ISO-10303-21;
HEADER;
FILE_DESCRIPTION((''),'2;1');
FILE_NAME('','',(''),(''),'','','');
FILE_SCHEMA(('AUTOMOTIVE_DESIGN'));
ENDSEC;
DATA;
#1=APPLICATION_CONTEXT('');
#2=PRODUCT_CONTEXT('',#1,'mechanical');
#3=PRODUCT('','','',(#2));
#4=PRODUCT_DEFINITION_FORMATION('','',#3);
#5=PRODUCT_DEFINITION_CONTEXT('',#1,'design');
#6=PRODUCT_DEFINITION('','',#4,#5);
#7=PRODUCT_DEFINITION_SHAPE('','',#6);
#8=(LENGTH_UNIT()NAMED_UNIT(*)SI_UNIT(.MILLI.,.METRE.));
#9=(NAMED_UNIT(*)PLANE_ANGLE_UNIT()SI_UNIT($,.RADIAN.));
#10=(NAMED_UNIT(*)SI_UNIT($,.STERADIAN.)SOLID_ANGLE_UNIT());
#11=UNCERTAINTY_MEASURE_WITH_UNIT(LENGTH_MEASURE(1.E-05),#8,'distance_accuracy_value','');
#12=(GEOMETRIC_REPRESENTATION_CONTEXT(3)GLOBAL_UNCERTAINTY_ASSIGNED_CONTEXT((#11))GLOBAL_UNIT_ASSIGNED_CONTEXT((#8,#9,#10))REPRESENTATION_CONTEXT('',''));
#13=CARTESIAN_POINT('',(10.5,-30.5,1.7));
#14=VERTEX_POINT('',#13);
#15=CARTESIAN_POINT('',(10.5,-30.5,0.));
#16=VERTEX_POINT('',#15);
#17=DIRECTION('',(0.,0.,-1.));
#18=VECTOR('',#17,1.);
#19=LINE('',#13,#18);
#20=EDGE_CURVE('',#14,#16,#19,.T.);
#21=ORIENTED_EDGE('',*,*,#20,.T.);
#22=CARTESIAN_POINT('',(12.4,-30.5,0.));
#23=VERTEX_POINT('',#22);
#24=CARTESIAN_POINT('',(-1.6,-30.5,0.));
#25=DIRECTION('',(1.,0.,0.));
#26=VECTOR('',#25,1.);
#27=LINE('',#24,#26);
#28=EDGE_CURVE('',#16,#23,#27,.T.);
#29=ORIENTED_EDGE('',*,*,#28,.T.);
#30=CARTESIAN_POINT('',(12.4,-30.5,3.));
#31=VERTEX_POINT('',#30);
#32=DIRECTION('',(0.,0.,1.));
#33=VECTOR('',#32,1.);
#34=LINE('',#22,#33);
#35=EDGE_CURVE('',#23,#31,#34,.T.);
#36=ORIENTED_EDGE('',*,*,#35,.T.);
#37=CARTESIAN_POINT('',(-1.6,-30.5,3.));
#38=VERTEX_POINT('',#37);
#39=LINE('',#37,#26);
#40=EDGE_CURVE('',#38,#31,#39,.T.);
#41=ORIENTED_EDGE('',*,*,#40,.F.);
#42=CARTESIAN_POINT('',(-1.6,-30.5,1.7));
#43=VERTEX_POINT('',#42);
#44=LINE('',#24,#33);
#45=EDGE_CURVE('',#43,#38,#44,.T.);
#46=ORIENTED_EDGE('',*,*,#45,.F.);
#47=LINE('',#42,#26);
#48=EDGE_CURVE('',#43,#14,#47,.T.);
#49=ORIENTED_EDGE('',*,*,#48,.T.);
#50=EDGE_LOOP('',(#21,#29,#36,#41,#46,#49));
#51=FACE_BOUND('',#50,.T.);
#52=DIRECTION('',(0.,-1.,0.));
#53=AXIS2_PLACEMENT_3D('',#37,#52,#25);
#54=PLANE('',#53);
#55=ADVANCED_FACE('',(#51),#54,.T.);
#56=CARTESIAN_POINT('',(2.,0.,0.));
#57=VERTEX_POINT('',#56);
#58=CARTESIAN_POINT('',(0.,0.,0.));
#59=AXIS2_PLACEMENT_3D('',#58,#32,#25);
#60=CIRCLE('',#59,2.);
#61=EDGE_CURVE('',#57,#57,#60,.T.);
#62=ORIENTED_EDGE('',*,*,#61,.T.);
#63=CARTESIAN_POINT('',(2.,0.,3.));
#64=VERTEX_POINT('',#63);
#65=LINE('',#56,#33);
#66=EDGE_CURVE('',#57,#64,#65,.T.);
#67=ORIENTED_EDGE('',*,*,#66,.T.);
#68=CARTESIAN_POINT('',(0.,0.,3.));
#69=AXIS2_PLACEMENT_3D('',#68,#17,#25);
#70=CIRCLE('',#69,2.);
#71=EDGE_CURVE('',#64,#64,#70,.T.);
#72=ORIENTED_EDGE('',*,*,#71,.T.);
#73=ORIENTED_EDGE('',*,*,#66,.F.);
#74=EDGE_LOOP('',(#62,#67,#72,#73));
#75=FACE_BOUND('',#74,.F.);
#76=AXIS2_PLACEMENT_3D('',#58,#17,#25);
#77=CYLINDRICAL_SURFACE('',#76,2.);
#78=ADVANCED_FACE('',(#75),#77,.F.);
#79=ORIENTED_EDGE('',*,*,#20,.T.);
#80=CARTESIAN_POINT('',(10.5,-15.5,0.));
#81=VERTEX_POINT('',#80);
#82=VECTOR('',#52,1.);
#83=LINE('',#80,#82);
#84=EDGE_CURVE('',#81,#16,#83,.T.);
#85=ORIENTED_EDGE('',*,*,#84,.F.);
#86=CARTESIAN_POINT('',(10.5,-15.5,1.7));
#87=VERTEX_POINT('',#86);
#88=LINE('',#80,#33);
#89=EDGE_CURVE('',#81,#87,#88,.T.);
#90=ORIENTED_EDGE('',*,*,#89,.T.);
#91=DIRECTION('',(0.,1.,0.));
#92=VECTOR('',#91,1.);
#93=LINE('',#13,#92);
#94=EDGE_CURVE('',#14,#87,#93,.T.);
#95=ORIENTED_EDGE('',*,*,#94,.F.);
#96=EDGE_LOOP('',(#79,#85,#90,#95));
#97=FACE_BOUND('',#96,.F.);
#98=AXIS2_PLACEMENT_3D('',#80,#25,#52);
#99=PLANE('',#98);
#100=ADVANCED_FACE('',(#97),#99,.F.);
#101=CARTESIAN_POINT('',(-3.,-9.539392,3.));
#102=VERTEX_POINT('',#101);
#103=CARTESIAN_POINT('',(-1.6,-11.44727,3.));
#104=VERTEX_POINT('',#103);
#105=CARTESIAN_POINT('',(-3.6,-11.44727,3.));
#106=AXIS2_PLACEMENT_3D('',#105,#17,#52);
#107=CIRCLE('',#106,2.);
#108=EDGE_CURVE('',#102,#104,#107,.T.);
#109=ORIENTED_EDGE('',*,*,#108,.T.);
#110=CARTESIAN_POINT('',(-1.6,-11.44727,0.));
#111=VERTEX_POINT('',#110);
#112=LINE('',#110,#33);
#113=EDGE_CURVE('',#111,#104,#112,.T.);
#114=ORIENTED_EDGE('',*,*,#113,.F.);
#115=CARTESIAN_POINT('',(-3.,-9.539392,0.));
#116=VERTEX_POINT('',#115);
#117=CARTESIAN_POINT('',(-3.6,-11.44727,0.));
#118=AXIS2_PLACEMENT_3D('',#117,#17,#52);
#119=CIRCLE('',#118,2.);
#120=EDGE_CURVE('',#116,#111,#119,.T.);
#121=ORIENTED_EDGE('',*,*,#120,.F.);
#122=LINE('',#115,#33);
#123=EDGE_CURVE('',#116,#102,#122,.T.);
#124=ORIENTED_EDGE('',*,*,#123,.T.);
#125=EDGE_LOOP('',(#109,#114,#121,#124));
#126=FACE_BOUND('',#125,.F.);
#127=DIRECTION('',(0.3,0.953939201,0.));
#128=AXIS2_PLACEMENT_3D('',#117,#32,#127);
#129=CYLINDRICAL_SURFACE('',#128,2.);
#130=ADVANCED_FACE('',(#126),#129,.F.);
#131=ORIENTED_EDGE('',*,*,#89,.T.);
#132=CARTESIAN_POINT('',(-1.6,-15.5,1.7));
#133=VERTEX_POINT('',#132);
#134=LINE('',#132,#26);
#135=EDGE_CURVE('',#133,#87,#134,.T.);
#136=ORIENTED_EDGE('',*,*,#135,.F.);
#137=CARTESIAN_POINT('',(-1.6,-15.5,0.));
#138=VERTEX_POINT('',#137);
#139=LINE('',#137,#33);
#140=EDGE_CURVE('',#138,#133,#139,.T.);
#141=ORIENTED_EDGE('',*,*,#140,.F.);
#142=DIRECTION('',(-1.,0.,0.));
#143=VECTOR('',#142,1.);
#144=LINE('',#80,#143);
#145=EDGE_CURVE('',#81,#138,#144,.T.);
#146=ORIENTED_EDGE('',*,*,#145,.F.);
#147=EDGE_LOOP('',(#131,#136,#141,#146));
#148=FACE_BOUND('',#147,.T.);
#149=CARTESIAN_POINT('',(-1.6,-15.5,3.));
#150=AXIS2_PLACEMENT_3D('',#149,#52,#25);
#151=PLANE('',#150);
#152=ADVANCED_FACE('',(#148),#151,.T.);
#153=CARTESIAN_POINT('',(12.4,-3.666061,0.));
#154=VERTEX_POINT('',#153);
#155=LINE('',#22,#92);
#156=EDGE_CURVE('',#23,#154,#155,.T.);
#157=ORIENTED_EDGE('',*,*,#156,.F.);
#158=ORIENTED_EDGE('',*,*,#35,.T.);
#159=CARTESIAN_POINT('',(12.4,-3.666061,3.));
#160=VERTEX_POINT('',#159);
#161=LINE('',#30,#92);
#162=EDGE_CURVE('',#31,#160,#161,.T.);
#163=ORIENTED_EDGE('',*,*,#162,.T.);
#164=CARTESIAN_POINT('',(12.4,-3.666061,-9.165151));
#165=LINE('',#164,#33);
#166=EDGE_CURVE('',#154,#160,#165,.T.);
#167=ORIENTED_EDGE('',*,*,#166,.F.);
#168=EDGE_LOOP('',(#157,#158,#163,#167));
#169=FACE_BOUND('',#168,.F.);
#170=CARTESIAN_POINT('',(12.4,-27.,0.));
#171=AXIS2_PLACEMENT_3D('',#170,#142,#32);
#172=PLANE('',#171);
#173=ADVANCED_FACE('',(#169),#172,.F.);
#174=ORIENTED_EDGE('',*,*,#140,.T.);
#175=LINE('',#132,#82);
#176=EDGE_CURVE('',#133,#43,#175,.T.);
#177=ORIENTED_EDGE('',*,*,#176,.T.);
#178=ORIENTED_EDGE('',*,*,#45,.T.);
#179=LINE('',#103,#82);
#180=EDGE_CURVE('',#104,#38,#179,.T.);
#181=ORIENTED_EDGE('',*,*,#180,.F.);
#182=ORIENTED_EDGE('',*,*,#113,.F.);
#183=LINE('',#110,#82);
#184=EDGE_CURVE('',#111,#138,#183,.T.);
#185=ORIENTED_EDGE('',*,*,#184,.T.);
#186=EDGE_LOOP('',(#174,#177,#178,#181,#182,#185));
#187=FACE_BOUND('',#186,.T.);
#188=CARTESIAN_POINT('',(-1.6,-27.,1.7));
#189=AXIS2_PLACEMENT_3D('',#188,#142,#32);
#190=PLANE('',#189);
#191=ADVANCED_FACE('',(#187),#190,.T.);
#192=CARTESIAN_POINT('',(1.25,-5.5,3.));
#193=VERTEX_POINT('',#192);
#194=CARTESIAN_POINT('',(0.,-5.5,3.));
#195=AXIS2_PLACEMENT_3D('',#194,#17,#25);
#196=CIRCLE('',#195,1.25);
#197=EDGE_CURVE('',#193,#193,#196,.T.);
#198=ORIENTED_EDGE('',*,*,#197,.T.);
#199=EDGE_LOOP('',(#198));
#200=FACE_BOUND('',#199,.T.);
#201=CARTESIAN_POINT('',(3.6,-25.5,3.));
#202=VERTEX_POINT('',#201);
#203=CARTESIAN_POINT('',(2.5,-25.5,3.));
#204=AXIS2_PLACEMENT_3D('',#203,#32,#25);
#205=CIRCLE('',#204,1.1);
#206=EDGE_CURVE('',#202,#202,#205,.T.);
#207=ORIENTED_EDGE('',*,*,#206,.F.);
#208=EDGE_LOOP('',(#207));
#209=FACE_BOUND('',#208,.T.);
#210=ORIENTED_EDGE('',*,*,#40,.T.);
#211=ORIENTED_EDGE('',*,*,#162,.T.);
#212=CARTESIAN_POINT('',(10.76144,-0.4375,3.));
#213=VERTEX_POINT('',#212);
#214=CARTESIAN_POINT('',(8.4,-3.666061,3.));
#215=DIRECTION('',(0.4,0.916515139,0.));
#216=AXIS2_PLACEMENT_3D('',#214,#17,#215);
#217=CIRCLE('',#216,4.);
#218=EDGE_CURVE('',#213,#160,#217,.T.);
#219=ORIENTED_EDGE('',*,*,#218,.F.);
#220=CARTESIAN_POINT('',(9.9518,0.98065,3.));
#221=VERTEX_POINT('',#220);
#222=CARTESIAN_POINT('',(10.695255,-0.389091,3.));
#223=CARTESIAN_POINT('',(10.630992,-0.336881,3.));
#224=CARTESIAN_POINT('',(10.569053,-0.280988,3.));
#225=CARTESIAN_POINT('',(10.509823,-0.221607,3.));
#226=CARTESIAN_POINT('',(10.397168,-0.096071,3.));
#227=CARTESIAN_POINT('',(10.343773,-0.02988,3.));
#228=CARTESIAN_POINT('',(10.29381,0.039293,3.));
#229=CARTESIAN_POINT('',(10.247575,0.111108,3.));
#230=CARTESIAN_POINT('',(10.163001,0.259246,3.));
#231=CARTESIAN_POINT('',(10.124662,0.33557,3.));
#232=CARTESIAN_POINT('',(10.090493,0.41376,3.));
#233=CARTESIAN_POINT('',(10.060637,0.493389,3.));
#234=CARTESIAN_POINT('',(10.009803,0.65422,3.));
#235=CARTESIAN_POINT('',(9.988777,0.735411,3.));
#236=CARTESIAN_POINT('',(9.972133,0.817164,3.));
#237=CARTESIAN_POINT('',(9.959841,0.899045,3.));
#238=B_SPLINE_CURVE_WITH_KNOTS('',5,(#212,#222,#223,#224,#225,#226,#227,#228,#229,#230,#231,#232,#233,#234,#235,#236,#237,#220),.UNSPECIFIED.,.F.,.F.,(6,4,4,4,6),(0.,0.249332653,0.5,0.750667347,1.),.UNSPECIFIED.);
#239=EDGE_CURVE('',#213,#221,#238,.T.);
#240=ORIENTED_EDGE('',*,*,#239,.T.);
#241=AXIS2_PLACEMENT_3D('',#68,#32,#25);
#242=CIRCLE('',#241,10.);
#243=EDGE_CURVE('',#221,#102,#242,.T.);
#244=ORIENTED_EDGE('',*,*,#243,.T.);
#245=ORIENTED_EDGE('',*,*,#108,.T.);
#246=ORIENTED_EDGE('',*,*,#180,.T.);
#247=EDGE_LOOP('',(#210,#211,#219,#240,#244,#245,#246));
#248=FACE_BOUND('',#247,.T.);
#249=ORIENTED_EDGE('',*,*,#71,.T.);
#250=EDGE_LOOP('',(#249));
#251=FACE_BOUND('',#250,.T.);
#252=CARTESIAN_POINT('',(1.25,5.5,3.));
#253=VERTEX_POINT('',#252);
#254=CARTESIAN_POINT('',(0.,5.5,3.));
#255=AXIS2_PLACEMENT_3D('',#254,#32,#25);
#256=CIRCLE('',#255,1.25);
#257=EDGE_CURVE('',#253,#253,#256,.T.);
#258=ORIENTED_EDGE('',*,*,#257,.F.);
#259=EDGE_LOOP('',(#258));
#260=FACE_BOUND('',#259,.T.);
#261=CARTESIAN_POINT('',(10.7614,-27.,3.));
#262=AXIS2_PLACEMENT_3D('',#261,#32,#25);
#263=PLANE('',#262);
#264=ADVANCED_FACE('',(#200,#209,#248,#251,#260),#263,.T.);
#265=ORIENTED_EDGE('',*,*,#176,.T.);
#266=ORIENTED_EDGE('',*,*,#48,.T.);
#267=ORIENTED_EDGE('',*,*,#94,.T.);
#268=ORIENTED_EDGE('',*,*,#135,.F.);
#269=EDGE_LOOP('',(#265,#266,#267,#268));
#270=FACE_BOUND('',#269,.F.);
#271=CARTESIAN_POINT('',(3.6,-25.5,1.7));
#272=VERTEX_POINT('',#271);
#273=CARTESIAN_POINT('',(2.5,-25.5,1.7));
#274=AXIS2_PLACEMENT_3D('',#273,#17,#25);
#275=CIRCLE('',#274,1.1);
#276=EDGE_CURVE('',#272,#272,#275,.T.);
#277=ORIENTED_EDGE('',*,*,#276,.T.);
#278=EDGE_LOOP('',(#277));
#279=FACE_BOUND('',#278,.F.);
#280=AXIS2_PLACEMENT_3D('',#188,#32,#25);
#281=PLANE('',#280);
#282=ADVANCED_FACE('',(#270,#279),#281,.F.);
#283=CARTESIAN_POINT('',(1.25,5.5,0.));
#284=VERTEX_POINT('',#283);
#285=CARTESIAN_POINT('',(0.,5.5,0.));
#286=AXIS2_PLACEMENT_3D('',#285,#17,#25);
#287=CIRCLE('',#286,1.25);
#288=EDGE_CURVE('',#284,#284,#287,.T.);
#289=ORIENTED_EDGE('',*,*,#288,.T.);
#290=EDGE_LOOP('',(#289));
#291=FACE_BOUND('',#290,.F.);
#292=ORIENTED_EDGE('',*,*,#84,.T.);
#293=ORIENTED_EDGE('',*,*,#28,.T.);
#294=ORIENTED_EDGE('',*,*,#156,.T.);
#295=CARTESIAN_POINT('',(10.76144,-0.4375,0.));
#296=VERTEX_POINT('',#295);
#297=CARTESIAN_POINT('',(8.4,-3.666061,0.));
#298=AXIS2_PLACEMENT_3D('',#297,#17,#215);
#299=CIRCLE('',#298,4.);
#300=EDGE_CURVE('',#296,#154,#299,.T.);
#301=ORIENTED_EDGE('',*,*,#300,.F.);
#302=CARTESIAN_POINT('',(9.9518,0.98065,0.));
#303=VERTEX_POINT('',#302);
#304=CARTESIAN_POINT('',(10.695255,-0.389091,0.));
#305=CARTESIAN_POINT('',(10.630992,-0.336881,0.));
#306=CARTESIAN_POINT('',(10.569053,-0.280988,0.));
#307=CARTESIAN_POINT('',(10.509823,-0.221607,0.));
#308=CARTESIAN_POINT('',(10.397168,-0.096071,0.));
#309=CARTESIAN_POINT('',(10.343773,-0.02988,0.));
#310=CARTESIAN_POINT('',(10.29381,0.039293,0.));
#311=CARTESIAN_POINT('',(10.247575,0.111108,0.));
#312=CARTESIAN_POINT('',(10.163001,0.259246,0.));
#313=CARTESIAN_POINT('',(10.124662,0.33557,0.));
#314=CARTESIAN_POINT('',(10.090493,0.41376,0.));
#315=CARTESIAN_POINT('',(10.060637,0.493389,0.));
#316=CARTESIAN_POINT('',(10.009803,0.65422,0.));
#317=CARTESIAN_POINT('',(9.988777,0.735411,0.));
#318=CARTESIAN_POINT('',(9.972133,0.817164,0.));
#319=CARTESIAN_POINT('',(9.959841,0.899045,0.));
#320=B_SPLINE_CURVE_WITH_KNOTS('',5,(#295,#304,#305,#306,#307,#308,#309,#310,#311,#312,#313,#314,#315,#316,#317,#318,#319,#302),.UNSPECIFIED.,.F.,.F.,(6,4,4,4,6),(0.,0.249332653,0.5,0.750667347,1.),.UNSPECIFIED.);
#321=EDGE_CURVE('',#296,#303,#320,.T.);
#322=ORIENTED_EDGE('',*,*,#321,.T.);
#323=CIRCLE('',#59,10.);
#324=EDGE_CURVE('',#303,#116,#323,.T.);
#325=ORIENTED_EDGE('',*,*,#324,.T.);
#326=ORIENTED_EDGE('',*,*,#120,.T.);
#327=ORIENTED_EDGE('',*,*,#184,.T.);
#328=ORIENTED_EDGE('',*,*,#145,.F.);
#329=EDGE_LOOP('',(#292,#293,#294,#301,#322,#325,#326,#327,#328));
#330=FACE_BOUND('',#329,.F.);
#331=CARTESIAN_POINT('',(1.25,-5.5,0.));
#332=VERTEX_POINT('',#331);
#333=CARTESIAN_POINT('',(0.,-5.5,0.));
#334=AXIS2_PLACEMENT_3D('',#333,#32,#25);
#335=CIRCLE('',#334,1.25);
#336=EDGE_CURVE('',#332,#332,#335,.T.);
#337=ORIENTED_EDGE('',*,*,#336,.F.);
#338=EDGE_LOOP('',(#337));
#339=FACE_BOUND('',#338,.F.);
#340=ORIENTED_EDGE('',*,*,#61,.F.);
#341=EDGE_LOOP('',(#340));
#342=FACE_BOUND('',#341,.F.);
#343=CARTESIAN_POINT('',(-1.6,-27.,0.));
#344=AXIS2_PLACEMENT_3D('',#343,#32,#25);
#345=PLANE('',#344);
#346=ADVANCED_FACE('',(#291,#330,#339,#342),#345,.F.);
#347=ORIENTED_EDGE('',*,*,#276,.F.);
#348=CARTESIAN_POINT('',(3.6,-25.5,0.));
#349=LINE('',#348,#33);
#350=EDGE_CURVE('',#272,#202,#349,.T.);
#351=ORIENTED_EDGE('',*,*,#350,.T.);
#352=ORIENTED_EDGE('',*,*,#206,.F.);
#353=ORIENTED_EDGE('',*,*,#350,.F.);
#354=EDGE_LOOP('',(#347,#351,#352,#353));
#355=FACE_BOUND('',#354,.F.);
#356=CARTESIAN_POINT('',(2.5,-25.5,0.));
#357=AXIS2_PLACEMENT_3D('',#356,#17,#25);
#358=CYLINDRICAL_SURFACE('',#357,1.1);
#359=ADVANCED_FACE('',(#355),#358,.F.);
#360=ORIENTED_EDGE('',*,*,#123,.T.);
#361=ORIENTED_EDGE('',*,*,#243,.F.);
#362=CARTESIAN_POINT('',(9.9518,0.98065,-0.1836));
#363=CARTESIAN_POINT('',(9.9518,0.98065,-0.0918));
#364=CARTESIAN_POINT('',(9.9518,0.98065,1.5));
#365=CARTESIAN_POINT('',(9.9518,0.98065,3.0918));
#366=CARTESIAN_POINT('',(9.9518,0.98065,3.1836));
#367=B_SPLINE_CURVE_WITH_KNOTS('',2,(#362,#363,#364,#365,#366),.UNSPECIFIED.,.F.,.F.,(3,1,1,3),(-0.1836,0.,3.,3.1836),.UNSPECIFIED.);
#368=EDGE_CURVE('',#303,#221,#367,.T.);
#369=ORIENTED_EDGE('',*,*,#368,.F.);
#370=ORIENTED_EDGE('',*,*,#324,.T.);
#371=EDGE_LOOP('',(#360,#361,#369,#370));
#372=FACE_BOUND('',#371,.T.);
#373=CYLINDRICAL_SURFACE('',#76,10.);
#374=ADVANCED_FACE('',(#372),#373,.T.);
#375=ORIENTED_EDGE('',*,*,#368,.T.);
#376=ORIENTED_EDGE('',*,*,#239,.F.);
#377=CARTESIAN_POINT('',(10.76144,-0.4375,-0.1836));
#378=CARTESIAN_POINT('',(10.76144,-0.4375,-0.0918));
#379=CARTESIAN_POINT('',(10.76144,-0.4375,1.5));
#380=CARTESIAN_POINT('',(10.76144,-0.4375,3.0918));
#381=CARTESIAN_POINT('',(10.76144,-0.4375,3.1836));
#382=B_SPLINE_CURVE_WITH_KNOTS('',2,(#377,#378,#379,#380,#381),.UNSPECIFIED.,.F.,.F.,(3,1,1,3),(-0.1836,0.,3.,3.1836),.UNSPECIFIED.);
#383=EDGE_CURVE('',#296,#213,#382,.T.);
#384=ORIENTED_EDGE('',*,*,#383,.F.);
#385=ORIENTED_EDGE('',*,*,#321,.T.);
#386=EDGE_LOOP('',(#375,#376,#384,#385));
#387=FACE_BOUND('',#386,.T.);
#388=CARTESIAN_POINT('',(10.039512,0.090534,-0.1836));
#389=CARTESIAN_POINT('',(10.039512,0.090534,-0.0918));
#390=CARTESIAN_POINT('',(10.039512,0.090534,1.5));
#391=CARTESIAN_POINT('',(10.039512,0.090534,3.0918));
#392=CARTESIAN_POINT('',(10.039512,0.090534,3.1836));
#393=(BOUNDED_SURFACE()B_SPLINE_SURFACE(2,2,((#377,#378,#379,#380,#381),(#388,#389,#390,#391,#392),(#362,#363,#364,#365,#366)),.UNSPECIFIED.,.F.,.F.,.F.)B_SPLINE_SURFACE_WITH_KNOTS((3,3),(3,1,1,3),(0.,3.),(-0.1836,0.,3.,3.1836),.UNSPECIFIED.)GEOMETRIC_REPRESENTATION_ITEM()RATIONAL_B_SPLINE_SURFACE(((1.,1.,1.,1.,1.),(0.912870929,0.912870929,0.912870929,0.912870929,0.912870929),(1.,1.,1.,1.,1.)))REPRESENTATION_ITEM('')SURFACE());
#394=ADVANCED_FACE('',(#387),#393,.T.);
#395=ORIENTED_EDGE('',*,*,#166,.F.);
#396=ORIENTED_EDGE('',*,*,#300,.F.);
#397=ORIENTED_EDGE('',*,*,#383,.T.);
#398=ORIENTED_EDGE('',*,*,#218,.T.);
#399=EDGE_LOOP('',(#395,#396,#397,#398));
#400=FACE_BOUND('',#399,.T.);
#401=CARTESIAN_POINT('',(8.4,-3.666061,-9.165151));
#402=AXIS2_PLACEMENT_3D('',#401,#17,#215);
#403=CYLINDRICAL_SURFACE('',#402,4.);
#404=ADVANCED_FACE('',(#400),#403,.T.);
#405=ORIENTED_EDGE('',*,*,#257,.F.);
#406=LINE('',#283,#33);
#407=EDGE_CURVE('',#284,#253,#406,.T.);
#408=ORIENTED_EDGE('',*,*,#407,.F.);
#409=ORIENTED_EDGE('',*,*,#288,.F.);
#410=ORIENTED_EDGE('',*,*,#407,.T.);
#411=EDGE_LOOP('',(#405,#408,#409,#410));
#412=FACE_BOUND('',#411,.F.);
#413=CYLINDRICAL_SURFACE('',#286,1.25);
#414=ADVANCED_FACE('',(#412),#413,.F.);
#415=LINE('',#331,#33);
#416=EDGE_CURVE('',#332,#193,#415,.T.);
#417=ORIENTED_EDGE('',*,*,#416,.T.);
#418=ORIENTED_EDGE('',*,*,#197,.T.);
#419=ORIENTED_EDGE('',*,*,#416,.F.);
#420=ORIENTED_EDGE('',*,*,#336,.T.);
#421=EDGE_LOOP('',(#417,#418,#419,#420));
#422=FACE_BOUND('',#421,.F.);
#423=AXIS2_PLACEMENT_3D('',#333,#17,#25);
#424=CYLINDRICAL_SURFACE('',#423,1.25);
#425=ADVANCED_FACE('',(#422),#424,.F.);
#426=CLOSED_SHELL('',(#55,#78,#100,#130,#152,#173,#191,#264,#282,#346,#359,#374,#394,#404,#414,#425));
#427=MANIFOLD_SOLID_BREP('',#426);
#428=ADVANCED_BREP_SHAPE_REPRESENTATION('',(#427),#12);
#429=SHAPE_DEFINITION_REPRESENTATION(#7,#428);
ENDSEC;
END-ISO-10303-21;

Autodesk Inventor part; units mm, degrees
ref_plane "YZ Plane" through (0, 0, 0) normal (1, 0, 0) x (0, 1, 0)
ref_plane "XZ Plane" through (0, 0, 0) normal (0, 1, 0) x (-1, 0, 0)
ref_plane "XY Plane" through (0, 0, 0) normal (0, 0, 1) x (1, 0, 0)
sketch "スケッチ1" plane through (0, 0, 0) normal (0, 0, 1) x (1, 0, 0)
  circle A0 centre (0, 0) radius 10
  line L0 (0, 0) -> (12.4, 0)
  line L1 (12.4, 0) -> (12.4, -45)
  line L2 (12.4, -45) -> (-1.6, -45)
  line L3 (-1.6, -45) -> (-1.6, 0)
  circle A1 centre (2.5, -25.5) radius 1.1
  circle A2 centre (2.5, -32) radius 1.7
  circle A3 centre (2.5, -42) radius 1.7
  circle A4 centre (0, 0) radius 5.5
  circle A5 centre (0, 5.5) radius 1.25
  circle A6 centre (0, -5.5) radius 1.25
  circle A7 centre (0, 0) radius 2
  line L4 (0, 0) -> (0, -45)
  line L5 (2.5, -25.5) -> (12.4, -25.5)
  point P0 (7.5, -6.6144)
  point P1 (-1.6, -9.8712)
  point P2 (10, 0)
  dimension "d0" = 20
  dimension "d3" = 12.4
  dimension "d4" = 45
  dimension "d5" = 14
  dimension "d6" = 2.2
  dimension "d7" = 3.4
  dimension "d8" = 3.4
  dimension "d9" = 11
  dimension "d10" = 2.5
  dimension "d11" = 2.5
  dimension "d12" = 4
  dimension "d16" = 2.5
  dimension "d17" = 2.5
  dimension "d18" = 2.5
  dimension "d19" = 9.9
  dimension "d37" = 25.5
extrude "押し出し1" add sketch "スケッチ1" along normal blind 3 contours L0 A4 A5 L3 A0 | L0 L1 L2 L4 A0 | A0 L4 A6 A4 L0 | L3 A4 A6 L4 A0 | A0 L4 L2 L3 | A4 A6 L4 A7 L0 | L0 A7 L3 A4 A5 | L3 A7 L4 A6 A4
fillet "フィレット1" radius 2 1 edges at (-1.6, -9.8712, 1.5)
fillet "フィレット2" radius 4 1 edges at (12.4, 0, 1.5)
fillet "フィレット3" radius 2 1 edges at (10, 0, 1.5)
sketch "スケッチ2" plane through (0, 0, 3) normal (0, 0, 1) x (1, 0, 0)
  line L0 (12.4, -45) -> (12.4, -3.6661) projected
  line L1 (12.4, -45) -> (12.4, -27)
  line L2 (12.4, -27) -> (-1.6, -27)
  line L3 (-1.6, -11.4473) -> (-1.6, -45) projected
  line L4 (-1.6, -27) -> (-1.6, -45)
  line L5 (-1.6, -45) -> (12.4, -45) projected
  line L6 (-1.6, -45) -> (12.4, -45)
  point P0 (0, 0)
  dimension "d22" = 18
extrude "押し出し2" cut sketch "スケッチ2" against normal blind 10
sketch "スケッチ3" plane through (0, 0, 3) normal (0, 0, 1) x (1, 0, 0)
  circle A0 centre (2.5, -25.5) radius 1.1 projected
  line L0 (2.5, -25.5) -> (2.5, -15.5)
  line L1 (2.5, -15.5) -> (10.5, -15.5)
  line L2 (10.5, -15.5) -> (10.5, -27)
  line L3 (-1.6, -27) -> (12.4, -27) projected
  point P0 (0, 0)
  dimension "d25" = 10
  dimension "d26" = 8
sketch "スケッチ5" plane through (-1.6, -27, 3) normal (0, -1, 0) x (1, 0, 0)
  line L0 (0, -3) -> (0, 0) projected
  line L1 (0, -1.5) -> (0, -1.3)
  line L2 (0, -1.3) -> (12.1, -1.3)
  line L3 (12.1, -1.3) -> (12.1, -1.7)
  line L4 (12.1, -1.7) -> (0, -1.7)
  line L5 (0, -1.7) -> (0, -1.5)
  point P0 (1.6, -3)
  point P1 (0, -1.7)
  dimension "d32" = 0.2
  dimension "d33" = 12.1
  dimension "d34" = 0.4
extrude "押し出し4" cut sketch "スケッチ5" against normal blind 11.5
sketch "スケッチ6" plane through (-1.6, -27, 3) normal (0, -1, 0) x (1, 0, 0)
  line L0 (12.3614, 0) -> (14, 0) projected
  line L1 (0, -3) -> (0, 0) projected
  line L2 (14, 0) -> (0, 0)
  line L3 (0, -1.3) -> (12.1, -1.3) projected
  line L4 (0, 0) -> (0, -1.3)
  line L5 (12.1, -1.3) -> (12.1, -1.7) projected
  line L6 (0, -1.3) -> (12.1, -1.3)
  line L7 (12.1, -1.7) -> (0, -1.7) projected
  line L8 (12.1, -1.3) -> (12.1, -1.7)
  line L9 (12.1, -1.7) -> (0, -1.7)
  line L10 (0, -1.7) -> (0, -3)
  line L11 (0, -3) -> (14, -3)
  line L12 (14, -3) -> (14, 0)
  point P0 (1.6, -3)
extrude "押し出し5" add sketch "スケッチ6" along normal blind 3.5 contours L0 L12 L11 L1 L7 L5 L3 L2
sketch "スケッチ7" plane through (0, 0, 0) normal (0, 0, -1) x (-1, 0, 0)
  line L0 (1.6, -11.4473) -> (1.6, -30.5) projected
  line L1 (1.6, -30.5) -> (1.6, -15.5)
  line L2 (-10.5, -15.5) -> (1.6, -15.5) projected
  line L3 (1.6, -15.5) -> (-10.5, -15.5)
  line L4 (-10.5, -15.5) -> (-10.5, -30.5)
  line L5 (-10.5, -30.5) -> (1.6, -30.5)
  point P0 (0, 0)
extrude "押し出し6" cut sketch "スケッチ7" against normal blind 1.5
properties part number "cutter_board_claws_endeffector_8_5_rotary-blade" material "ABS プラスチック"
